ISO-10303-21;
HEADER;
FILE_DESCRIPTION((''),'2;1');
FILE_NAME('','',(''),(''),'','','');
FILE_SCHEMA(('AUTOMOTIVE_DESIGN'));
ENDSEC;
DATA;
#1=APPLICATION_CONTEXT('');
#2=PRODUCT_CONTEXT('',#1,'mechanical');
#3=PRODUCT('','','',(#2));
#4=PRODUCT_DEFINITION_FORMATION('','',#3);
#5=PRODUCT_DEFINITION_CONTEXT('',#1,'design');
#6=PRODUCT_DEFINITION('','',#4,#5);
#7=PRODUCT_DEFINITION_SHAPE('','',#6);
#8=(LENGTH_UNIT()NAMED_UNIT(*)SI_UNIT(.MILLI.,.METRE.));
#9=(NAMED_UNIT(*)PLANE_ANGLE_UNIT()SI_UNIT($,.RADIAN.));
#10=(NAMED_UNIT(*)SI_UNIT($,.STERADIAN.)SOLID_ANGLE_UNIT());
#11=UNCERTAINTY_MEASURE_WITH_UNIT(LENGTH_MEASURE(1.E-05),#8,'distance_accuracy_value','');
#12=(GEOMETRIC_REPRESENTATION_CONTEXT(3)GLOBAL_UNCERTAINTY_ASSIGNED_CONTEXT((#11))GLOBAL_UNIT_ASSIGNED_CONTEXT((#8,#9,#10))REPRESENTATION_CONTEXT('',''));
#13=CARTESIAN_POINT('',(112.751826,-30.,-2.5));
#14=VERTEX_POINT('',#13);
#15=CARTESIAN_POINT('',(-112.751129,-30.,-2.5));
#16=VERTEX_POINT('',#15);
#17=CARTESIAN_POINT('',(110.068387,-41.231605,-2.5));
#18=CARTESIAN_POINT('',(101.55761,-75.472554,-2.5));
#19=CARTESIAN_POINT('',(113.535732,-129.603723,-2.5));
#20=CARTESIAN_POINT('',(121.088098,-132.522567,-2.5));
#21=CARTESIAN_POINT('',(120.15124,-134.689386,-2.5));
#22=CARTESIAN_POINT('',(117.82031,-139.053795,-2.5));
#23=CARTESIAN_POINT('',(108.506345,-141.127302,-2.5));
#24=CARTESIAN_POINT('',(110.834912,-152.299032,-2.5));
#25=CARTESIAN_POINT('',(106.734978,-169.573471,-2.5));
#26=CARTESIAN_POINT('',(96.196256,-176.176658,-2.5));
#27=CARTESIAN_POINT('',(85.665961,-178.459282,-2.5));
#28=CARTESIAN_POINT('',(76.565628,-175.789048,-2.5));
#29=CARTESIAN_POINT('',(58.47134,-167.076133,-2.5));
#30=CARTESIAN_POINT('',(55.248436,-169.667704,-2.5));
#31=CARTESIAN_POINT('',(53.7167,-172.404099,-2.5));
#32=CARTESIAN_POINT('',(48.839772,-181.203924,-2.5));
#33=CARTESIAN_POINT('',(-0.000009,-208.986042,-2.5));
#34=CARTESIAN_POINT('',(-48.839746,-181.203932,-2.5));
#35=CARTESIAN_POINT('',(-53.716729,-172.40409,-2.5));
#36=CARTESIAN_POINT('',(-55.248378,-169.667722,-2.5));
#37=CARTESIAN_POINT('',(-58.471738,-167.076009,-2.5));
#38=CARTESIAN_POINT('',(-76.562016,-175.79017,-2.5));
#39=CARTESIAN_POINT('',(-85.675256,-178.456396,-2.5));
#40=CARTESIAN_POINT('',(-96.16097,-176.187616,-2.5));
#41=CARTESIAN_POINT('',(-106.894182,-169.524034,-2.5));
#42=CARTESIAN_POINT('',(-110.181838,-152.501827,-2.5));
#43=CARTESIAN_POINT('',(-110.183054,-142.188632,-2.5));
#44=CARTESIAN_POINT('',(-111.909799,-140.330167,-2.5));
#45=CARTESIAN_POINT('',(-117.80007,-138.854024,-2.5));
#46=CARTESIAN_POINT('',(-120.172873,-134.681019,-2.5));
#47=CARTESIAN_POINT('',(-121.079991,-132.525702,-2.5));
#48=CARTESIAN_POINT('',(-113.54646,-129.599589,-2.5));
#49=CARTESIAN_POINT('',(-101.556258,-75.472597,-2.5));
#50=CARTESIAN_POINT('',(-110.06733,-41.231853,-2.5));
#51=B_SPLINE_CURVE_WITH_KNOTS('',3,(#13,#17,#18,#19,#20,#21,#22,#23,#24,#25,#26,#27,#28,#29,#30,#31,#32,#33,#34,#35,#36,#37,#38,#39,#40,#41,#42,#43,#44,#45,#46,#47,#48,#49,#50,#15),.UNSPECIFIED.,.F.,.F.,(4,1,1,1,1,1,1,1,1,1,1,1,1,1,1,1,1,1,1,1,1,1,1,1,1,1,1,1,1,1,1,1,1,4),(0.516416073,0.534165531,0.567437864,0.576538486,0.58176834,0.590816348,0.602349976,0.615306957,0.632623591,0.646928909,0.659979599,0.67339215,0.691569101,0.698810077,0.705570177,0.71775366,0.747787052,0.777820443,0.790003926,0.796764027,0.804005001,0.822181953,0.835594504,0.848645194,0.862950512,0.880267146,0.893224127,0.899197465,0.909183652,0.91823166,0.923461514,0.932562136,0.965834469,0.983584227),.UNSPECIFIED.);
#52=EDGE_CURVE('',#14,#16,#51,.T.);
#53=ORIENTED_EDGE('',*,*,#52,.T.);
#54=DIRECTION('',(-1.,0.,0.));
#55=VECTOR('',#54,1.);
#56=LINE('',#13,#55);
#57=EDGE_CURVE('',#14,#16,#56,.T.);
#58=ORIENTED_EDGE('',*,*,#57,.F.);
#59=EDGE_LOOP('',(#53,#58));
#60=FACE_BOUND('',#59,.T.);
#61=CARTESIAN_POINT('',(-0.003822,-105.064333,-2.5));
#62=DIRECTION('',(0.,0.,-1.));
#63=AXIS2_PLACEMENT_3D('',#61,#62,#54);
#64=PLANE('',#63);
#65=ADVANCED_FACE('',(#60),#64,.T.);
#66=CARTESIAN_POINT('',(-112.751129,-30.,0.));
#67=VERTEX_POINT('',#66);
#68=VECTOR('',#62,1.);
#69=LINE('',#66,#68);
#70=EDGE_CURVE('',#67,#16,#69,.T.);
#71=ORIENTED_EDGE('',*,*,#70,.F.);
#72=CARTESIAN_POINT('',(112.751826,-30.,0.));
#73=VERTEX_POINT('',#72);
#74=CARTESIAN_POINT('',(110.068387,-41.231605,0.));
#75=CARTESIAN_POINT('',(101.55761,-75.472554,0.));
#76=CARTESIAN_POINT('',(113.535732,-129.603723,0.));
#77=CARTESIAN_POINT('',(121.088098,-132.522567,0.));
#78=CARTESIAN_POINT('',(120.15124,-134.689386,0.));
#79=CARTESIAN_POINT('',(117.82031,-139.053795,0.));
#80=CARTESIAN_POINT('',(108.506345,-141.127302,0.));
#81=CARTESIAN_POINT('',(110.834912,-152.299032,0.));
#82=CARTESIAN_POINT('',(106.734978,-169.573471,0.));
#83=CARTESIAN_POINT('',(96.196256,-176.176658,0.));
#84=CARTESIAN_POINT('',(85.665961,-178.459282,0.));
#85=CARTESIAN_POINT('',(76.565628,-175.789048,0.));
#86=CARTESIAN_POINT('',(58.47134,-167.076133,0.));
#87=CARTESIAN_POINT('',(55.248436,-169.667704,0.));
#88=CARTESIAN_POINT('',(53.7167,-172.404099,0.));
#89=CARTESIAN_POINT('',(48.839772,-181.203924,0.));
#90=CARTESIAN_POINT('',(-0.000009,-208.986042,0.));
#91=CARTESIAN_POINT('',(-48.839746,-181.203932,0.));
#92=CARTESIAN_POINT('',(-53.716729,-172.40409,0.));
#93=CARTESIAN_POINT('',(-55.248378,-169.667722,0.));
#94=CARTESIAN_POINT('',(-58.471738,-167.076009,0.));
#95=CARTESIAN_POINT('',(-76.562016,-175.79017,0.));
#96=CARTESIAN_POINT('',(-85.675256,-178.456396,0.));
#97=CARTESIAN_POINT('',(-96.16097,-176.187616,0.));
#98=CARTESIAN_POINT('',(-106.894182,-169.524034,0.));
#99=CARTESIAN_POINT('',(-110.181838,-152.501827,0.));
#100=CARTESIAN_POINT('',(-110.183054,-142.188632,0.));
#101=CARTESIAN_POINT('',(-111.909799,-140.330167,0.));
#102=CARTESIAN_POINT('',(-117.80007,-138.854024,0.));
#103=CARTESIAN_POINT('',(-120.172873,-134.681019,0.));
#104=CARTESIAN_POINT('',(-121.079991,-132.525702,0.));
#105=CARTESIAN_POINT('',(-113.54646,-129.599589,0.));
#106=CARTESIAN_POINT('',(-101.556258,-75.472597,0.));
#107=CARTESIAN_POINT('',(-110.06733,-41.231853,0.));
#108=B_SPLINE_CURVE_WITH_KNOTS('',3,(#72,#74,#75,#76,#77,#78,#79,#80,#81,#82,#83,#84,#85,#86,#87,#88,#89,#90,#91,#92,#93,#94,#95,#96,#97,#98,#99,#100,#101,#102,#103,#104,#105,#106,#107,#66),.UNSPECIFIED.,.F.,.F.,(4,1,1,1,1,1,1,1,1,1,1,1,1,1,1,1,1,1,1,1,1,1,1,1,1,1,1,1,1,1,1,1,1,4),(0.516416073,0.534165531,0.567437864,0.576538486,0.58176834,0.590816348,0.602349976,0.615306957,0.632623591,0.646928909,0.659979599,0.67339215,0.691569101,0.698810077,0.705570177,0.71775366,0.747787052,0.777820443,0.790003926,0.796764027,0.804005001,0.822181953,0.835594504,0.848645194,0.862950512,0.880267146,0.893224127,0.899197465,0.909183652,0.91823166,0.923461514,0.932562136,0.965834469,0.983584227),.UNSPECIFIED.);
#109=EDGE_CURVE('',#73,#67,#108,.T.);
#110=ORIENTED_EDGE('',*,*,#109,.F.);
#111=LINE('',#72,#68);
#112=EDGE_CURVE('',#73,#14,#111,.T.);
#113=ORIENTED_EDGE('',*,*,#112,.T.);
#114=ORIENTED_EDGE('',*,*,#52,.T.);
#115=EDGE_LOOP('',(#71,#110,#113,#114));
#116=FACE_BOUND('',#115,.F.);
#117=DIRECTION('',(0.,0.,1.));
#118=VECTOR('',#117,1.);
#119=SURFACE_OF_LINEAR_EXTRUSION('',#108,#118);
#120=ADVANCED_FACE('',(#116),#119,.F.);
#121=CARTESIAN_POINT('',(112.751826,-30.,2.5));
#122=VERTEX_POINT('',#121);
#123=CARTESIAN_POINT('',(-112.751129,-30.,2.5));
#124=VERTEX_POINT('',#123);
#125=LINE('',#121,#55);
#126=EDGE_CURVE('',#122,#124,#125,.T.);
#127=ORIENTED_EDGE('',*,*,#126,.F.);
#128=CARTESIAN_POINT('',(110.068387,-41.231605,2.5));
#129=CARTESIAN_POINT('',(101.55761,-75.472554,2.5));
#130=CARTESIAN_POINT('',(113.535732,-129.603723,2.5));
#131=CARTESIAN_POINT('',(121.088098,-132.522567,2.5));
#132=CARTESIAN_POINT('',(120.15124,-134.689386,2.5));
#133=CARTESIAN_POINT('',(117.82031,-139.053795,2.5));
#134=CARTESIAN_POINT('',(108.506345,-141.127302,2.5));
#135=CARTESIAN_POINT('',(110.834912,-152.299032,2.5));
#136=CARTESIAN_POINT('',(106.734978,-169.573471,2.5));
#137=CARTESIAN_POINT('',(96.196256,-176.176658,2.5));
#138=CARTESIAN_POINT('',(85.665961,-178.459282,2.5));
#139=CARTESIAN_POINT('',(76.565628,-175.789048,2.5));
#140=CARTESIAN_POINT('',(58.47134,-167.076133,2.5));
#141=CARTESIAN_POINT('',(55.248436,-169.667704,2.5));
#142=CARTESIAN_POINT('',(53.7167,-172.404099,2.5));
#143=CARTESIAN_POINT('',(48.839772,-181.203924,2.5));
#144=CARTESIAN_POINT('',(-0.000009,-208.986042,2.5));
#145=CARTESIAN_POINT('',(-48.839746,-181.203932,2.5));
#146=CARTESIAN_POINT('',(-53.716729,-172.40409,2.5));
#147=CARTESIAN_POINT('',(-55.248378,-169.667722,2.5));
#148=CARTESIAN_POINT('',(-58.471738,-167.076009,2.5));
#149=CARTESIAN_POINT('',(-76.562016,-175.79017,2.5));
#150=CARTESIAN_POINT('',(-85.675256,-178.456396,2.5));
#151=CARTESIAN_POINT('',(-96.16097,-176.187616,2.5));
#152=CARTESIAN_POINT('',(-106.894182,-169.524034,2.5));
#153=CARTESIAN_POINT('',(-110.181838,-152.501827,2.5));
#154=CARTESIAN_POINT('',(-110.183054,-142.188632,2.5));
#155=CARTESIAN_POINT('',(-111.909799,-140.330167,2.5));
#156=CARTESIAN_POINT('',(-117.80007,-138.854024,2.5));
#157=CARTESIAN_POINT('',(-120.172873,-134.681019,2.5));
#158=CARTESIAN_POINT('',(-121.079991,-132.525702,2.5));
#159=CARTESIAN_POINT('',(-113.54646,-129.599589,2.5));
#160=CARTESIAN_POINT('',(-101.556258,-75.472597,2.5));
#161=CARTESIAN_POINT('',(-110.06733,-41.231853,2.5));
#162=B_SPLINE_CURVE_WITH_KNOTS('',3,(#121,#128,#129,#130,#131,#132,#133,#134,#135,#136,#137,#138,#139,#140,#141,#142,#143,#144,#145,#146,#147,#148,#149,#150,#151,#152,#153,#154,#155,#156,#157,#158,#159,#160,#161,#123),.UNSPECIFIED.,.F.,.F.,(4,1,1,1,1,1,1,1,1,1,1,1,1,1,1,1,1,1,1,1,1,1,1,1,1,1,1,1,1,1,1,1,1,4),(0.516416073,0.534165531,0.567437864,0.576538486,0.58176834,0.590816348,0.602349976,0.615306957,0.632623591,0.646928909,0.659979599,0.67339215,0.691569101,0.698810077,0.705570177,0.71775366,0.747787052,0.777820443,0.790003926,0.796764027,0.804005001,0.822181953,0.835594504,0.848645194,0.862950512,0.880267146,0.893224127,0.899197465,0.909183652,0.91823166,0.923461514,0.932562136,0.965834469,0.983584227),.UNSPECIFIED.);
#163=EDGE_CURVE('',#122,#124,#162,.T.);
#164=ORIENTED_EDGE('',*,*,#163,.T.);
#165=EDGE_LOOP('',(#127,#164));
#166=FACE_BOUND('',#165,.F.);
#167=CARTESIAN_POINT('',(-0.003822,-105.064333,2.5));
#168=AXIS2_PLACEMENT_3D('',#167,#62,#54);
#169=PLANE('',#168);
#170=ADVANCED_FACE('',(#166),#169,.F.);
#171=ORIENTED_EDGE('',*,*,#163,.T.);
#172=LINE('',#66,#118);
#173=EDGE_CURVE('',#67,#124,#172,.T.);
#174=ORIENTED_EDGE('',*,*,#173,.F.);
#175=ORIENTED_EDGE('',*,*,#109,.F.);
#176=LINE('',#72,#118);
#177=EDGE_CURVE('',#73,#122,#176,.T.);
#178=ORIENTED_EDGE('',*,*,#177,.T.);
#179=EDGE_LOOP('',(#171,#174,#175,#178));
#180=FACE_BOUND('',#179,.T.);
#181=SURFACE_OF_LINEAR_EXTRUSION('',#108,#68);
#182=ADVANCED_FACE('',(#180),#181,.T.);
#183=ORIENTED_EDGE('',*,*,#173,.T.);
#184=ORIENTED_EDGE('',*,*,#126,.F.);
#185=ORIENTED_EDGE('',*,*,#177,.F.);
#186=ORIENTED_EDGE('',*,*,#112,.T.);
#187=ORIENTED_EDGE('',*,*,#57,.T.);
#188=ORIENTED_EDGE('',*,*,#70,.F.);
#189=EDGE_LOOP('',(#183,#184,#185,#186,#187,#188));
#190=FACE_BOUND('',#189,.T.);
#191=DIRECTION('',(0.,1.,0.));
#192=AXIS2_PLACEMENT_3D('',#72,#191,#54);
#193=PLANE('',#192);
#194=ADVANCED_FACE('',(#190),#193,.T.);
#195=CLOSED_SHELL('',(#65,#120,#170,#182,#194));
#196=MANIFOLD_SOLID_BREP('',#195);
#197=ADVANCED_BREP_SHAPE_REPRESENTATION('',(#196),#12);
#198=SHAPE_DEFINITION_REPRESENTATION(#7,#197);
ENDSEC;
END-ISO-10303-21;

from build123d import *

# Parameters (mm, degrees)
F1_DEPTH = 2.5


with BuildPart() as f1:
    # F0 (on Top) → F1 (new body, symmetric)
    with BuildSketch(Plane.XY):
        with BuildLine():
            add(Edge.make_bspline(
                [(112.7518263381, -30), (110.0683866332, -41.2316047198), (101.557609718, -75.4725543916), (113.5357319655, -129.6037233134), (121.0880978452, -132.5225666296), (120.1512402386, -134.6893862512), (117.8203099052, -139.0537945373), (108.5063446408, -141.127301968), (110.834911802, -152.2990319153), (106.7349782851, -169.57347089), (96.1962562119, -176.1766582928), (85.6659613701, -178.4592822583), (76.5656283591, -175.7890482771), (58.4713403875, -167.0761326186), (55.2484363403, -169.6677039086), (53.716699705, -172.4040985511), (48.8397722553, -181.2039244379), (-9.3679e-06, -208.9860419393), (-48.839745919, -181.2039320243), (-53.716728711, -172.4040895936), (-55.2483775265, -169.6677221612), (-58.4717375728, -167.076009291), (-76.5620163803, -175.7901698806), (-85.6752558963, -178.4563960867), (-96.1609696724, -176.1876156046), (-106.8941817396, -169.5240344209), (-110.1818375624, -152.5018270408), (-110.1830537947, -142.1886320016), (-111.9097986439, -140.3301668428), (-117.8000702343, -138.8540242127), (-120.1728726925, -134.6810189597), (-121.0799907347, -132.525701525), (-113.5464604846, -129.5995892682), (-101.5562579572, -75.4725971802), (-110.0673297713, -41.2318534903), (-112.7511285434, -30)],
                knots=[0.5164160728, 0.5164160728, 0.5164160728, 0.5164160728, 0.5341655307, 0.5674378641, 0.5765384861, 0.5817683397, 0.5908163485, 0.6023499757, 0.6153069574, 0.6326235914, 0.6469289094, 0.6599795987, 0.6733921502, 0.6915691015, 0.6988100765, 0.7055701771, 0.7177536596, 0.7477870515, 0.7778204434, 0.7900039259, 0.7967640266, 0.8040050015, 0.8221819528, 0.8355945043, 0.8486451936, 0.8629505116, 0.8802671456, 0.8932241273, 0.8991974648, 0.9091836515, 0.9182316603, 0.9234615139, 0.9325621359, 0.9658344693, 0.9835842271, 0.9835842271, 0.9835842271, 0.9835842271], degree=3))
            Line((112.7518263381, -30), (-112.7511285434, -30))
        make_face()
    extrude(amount=F1_DEPTH, both=True)


solid = f1.part
